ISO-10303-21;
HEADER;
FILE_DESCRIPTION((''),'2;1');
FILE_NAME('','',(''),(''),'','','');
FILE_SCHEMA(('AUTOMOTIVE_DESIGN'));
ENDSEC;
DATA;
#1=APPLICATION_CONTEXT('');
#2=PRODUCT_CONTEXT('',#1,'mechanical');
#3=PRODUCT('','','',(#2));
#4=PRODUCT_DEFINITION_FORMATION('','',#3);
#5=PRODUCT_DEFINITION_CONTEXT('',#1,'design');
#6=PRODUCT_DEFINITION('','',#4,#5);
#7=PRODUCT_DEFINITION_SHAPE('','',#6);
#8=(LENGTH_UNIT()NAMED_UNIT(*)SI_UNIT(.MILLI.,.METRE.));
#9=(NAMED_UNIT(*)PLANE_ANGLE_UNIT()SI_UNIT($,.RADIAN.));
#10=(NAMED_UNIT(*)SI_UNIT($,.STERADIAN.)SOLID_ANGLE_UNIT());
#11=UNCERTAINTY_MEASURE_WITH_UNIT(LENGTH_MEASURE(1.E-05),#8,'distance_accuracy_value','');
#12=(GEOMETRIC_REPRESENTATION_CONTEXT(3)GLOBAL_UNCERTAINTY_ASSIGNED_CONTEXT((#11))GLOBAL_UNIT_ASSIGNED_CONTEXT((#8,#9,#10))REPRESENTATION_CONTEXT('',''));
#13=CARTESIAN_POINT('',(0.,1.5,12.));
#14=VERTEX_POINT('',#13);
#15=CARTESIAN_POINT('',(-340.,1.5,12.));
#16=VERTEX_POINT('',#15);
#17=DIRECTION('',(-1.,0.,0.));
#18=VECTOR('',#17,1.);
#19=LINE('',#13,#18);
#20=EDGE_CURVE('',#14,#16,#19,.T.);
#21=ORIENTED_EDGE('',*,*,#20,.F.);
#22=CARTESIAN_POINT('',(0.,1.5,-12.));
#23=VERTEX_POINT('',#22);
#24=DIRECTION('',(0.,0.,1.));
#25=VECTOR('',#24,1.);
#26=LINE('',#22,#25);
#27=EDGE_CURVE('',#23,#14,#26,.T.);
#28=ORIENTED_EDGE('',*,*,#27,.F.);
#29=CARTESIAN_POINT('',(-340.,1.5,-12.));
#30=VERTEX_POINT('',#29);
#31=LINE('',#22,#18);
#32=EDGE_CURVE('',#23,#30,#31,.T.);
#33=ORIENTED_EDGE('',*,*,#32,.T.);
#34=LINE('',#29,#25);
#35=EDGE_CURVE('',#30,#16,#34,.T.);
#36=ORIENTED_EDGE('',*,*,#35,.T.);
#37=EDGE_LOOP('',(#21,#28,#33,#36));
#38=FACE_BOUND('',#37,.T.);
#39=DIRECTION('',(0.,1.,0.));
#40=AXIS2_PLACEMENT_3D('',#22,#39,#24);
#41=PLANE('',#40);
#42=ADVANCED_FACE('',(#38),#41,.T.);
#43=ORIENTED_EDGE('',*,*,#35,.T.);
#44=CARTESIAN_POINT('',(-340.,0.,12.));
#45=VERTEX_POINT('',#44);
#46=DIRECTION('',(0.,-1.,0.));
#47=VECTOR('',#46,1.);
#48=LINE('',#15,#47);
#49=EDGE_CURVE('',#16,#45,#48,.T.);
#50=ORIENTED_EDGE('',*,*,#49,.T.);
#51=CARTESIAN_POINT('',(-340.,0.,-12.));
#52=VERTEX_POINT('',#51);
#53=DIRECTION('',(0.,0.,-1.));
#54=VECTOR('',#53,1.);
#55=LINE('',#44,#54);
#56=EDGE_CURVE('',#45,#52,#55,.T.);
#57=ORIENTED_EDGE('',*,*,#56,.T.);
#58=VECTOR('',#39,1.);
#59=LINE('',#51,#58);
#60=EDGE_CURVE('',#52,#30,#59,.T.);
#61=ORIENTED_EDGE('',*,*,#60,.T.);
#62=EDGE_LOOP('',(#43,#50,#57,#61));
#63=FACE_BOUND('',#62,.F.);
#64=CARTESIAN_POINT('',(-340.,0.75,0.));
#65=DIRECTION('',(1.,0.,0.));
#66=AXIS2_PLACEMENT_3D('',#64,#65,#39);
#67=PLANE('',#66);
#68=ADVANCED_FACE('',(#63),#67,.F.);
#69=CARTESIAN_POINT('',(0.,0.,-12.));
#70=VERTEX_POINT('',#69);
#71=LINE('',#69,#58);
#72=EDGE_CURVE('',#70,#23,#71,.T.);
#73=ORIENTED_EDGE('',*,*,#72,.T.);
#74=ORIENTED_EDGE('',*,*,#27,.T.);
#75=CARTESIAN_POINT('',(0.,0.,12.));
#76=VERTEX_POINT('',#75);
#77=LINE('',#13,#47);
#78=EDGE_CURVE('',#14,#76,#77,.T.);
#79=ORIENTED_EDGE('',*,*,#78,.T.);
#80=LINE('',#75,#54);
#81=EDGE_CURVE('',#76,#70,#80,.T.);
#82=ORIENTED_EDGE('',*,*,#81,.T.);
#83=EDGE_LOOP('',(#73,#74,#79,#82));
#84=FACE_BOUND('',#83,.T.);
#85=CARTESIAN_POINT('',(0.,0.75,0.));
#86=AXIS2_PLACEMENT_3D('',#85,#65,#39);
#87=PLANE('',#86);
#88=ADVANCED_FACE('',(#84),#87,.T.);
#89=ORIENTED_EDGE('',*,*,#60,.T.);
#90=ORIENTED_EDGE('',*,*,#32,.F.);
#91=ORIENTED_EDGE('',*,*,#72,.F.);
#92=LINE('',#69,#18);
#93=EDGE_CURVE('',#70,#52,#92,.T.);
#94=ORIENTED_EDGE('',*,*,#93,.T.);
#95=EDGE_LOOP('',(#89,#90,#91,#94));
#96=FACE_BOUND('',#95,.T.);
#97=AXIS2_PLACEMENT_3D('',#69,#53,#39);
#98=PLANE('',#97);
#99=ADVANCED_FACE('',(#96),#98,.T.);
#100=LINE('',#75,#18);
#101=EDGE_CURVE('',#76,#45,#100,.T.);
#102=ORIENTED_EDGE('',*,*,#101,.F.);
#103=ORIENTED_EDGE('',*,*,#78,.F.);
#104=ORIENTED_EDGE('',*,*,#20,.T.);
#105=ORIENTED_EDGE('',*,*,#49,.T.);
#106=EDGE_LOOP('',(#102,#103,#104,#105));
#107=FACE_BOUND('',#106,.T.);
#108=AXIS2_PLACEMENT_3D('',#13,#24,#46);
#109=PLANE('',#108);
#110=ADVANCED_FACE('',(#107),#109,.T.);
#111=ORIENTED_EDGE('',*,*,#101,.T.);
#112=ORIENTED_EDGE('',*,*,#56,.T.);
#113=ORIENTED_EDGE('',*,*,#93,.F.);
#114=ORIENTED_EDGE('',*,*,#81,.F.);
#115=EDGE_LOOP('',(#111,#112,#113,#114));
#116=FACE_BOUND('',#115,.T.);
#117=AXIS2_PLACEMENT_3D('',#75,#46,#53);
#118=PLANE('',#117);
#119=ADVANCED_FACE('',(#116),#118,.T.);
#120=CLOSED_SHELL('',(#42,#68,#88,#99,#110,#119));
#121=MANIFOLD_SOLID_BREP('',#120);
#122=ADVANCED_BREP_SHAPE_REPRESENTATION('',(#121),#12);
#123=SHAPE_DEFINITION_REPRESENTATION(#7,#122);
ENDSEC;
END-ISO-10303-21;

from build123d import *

# Parameters (mm, degrees)
F3_DEPTH = 340


# Not quite as in the source:
# - the program builds the solid bodies; features that only make, move or delete a surface that nothing else refers to are left out


with BuildPart() as f3:
    # F2 (on Right) → F3 (new body)
    with BuildSketch(Plane.YZ):
        Polygon((0, 12), (0, 0), (0, -12), (1.5, -12), (1.5, 12), align=None)
    extrude(amount=-F3_DEPTH)


solid = f3.part
